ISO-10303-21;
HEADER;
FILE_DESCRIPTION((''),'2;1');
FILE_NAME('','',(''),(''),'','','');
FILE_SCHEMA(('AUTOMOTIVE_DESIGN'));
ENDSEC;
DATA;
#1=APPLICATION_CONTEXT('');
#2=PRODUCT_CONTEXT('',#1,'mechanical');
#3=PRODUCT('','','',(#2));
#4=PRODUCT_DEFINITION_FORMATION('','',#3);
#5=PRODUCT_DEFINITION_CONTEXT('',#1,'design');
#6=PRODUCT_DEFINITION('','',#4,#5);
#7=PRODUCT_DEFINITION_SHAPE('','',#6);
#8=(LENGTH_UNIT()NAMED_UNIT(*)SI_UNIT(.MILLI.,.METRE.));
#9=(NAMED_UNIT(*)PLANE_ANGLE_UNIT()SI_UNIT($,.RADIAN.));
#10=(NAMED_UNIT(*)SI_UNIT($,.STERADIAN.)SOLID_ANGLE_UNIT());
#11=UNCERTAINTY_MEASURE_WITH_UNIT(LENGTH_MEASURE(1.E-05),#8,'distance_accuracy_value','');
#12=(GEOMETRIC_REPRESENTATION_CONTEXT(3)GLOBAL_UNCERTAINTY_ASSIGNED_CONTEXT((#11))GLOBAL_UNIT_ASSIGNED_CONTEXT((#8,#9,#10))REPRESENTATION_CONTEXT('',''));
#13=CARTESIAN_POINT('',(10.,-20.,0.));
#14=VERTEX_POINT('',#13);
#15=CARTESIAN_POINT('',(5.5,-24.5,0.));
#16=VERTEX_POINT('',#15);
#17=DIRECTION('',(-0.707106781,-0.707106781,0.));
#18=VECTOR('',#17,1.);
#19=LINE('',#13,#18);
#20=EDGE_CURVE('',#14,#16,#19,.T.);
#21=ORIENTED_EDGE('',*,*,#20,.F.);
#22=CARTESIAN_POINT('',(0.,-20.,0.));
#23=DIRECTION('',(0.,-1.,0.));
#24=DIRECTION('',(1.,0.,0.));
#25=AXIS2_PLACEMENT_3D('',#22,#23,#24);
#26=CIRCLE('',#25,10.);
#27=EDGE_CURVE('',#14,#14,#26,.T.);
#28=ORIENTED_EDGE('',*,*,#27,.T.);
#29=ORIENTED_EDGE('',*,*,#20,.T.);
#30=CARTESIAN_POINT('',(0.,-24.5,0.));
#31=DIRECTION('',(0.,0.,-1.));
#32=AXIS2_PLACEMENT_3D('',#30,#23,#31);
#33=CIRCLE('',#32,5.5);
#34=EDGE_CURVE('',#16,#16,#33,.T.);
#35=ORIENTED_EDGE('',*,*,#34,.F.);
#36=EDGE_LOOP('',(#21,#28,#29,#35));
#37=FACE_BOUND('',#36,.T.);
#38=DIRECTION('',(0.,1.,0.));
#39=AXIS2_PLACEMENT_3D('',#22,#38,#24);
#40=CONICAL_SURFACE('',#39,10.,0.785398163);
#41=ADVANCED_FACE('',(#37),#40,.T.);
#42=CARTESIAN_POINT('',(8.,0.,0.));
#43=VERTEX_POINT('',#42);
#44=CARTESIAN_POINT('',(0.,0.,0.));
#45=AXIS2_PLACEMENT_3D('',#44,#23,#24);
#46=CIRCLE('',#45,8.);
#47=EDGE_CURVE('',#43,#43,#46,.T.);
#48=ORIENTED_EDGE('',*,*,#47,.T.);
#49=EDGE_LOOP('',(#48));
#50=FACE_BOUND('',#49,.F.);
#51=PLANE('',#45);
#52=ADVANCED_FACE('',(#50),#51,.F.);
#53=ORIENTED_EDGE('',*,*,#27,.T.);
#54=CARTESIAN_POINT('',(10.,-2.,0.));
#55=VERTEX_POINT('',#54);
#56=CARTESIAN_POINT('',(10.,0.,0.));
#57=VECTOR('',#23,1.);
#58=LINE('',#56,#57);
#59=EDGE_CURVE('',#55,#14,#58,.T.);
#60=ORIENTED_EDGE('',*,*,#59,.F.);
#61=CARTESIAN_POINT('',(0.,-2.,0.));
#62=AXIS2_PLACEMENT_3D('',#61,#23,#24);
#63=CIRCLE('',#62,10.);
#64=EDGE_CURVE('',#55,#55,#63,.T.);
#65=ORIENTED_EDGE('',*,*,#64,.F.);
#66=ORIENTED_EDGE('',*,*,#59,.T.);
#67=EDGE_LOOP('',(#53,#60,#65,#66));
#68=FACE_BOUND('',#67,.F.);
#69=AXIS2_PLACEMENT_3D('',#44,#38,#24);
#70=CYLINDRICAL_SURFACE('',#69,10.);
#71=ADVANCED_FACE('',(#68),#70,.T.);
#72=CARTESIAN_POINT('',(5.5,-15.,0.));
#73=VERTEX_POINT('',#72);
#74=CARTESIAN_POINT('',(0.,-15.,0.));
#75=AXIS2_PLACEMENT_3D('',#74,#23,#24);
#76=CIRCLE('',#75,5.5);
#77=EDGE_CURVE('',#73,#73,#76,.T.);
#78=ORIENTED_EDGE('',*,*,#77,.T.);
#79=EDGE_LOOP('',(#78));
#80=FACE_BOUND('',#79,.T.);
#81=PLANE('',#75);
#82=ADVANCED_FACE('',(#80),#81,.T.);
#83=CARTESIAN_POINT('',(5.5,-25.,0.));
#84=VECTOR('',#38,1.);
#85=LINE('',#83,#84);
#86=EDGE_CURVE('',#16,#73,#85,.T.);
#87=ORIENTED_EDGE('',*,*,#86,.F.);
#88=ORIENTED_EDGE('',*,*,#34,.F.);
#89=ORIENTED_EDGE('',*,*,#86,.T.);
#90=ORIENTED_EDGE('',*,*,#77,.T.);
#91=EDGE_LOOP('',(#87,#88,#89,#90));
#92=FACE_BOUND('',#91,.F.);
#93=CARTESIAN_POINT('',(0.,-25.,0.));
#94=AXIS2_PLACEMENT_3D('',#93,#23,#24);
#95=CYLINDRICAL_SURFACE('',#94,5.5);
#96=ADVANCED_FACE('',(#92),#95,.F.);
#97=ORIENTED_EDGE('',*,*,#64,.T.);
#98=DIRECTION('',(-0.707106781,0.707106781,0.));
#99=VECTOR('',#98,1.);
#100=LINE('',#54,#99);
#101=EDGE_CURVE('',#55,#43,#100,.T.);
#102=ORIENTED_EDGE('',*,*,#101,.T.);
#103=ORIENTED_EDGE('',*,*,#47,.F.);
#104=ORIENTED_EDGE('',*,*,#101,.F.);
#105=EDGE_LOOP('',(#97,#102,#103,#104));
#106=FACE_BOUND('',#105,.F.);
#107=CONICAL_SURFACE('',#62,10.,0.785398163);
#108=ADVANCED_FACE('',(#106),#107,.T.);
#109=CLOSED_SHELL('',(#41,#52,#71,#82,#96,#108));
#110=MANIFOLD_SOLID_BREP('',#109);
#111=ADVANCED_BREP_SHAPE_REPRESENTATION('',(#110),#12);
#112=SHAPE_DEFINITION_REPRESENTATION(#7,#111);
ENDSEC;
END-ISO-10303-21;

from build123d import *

# Parameters (mm, degrees)
F0_R     = 10
F1_DEPTH = 25
F2_R     = 5.5
F3_DEPTH = 10
F4_SIZE  = 2


# Not quite as in the source:
# - a fillet or chamfer that OpenCascade refuses, or shapes differently, is made with other operations: its cross-section is extruded or revolved along the edge and cut away or added


with BuildPart() as f1:
    # F0 (on Front) → F1 (new body)
    with BuildSketch(Plane.XZ):
        Circle(F0_R)
    extrude(amount=F1_DEPTH)

    # F2 (on face) → F3 (cut)
    with BuildSketch(Plane.XZ.offset(25)):
        Circle(F2_R)
    extrude(amount=-F3_DEPTH, mode=Mode.SUBTRACT)

    # F4
    f4_edges = [f1.edges().sort_by_distance(p)[0] for p in [
        (-10, 0, 0),
    ]]
    chamfer(f4_edges, length=F4_SIZE)

    # F5: chamfer of 5 on 1 edges, made by hand

    # F5_s1 → F5_t2 (revolve, cut)
    with BuildSketch(Plane.XY):
        Polygon((10, -20), (5, -25), (10, -25), align=None)
    revolve(axis=Axis((0, -25, 0), (0, -1, 0)), mode=Mode.SUBTRACT)


solid = f1.part
